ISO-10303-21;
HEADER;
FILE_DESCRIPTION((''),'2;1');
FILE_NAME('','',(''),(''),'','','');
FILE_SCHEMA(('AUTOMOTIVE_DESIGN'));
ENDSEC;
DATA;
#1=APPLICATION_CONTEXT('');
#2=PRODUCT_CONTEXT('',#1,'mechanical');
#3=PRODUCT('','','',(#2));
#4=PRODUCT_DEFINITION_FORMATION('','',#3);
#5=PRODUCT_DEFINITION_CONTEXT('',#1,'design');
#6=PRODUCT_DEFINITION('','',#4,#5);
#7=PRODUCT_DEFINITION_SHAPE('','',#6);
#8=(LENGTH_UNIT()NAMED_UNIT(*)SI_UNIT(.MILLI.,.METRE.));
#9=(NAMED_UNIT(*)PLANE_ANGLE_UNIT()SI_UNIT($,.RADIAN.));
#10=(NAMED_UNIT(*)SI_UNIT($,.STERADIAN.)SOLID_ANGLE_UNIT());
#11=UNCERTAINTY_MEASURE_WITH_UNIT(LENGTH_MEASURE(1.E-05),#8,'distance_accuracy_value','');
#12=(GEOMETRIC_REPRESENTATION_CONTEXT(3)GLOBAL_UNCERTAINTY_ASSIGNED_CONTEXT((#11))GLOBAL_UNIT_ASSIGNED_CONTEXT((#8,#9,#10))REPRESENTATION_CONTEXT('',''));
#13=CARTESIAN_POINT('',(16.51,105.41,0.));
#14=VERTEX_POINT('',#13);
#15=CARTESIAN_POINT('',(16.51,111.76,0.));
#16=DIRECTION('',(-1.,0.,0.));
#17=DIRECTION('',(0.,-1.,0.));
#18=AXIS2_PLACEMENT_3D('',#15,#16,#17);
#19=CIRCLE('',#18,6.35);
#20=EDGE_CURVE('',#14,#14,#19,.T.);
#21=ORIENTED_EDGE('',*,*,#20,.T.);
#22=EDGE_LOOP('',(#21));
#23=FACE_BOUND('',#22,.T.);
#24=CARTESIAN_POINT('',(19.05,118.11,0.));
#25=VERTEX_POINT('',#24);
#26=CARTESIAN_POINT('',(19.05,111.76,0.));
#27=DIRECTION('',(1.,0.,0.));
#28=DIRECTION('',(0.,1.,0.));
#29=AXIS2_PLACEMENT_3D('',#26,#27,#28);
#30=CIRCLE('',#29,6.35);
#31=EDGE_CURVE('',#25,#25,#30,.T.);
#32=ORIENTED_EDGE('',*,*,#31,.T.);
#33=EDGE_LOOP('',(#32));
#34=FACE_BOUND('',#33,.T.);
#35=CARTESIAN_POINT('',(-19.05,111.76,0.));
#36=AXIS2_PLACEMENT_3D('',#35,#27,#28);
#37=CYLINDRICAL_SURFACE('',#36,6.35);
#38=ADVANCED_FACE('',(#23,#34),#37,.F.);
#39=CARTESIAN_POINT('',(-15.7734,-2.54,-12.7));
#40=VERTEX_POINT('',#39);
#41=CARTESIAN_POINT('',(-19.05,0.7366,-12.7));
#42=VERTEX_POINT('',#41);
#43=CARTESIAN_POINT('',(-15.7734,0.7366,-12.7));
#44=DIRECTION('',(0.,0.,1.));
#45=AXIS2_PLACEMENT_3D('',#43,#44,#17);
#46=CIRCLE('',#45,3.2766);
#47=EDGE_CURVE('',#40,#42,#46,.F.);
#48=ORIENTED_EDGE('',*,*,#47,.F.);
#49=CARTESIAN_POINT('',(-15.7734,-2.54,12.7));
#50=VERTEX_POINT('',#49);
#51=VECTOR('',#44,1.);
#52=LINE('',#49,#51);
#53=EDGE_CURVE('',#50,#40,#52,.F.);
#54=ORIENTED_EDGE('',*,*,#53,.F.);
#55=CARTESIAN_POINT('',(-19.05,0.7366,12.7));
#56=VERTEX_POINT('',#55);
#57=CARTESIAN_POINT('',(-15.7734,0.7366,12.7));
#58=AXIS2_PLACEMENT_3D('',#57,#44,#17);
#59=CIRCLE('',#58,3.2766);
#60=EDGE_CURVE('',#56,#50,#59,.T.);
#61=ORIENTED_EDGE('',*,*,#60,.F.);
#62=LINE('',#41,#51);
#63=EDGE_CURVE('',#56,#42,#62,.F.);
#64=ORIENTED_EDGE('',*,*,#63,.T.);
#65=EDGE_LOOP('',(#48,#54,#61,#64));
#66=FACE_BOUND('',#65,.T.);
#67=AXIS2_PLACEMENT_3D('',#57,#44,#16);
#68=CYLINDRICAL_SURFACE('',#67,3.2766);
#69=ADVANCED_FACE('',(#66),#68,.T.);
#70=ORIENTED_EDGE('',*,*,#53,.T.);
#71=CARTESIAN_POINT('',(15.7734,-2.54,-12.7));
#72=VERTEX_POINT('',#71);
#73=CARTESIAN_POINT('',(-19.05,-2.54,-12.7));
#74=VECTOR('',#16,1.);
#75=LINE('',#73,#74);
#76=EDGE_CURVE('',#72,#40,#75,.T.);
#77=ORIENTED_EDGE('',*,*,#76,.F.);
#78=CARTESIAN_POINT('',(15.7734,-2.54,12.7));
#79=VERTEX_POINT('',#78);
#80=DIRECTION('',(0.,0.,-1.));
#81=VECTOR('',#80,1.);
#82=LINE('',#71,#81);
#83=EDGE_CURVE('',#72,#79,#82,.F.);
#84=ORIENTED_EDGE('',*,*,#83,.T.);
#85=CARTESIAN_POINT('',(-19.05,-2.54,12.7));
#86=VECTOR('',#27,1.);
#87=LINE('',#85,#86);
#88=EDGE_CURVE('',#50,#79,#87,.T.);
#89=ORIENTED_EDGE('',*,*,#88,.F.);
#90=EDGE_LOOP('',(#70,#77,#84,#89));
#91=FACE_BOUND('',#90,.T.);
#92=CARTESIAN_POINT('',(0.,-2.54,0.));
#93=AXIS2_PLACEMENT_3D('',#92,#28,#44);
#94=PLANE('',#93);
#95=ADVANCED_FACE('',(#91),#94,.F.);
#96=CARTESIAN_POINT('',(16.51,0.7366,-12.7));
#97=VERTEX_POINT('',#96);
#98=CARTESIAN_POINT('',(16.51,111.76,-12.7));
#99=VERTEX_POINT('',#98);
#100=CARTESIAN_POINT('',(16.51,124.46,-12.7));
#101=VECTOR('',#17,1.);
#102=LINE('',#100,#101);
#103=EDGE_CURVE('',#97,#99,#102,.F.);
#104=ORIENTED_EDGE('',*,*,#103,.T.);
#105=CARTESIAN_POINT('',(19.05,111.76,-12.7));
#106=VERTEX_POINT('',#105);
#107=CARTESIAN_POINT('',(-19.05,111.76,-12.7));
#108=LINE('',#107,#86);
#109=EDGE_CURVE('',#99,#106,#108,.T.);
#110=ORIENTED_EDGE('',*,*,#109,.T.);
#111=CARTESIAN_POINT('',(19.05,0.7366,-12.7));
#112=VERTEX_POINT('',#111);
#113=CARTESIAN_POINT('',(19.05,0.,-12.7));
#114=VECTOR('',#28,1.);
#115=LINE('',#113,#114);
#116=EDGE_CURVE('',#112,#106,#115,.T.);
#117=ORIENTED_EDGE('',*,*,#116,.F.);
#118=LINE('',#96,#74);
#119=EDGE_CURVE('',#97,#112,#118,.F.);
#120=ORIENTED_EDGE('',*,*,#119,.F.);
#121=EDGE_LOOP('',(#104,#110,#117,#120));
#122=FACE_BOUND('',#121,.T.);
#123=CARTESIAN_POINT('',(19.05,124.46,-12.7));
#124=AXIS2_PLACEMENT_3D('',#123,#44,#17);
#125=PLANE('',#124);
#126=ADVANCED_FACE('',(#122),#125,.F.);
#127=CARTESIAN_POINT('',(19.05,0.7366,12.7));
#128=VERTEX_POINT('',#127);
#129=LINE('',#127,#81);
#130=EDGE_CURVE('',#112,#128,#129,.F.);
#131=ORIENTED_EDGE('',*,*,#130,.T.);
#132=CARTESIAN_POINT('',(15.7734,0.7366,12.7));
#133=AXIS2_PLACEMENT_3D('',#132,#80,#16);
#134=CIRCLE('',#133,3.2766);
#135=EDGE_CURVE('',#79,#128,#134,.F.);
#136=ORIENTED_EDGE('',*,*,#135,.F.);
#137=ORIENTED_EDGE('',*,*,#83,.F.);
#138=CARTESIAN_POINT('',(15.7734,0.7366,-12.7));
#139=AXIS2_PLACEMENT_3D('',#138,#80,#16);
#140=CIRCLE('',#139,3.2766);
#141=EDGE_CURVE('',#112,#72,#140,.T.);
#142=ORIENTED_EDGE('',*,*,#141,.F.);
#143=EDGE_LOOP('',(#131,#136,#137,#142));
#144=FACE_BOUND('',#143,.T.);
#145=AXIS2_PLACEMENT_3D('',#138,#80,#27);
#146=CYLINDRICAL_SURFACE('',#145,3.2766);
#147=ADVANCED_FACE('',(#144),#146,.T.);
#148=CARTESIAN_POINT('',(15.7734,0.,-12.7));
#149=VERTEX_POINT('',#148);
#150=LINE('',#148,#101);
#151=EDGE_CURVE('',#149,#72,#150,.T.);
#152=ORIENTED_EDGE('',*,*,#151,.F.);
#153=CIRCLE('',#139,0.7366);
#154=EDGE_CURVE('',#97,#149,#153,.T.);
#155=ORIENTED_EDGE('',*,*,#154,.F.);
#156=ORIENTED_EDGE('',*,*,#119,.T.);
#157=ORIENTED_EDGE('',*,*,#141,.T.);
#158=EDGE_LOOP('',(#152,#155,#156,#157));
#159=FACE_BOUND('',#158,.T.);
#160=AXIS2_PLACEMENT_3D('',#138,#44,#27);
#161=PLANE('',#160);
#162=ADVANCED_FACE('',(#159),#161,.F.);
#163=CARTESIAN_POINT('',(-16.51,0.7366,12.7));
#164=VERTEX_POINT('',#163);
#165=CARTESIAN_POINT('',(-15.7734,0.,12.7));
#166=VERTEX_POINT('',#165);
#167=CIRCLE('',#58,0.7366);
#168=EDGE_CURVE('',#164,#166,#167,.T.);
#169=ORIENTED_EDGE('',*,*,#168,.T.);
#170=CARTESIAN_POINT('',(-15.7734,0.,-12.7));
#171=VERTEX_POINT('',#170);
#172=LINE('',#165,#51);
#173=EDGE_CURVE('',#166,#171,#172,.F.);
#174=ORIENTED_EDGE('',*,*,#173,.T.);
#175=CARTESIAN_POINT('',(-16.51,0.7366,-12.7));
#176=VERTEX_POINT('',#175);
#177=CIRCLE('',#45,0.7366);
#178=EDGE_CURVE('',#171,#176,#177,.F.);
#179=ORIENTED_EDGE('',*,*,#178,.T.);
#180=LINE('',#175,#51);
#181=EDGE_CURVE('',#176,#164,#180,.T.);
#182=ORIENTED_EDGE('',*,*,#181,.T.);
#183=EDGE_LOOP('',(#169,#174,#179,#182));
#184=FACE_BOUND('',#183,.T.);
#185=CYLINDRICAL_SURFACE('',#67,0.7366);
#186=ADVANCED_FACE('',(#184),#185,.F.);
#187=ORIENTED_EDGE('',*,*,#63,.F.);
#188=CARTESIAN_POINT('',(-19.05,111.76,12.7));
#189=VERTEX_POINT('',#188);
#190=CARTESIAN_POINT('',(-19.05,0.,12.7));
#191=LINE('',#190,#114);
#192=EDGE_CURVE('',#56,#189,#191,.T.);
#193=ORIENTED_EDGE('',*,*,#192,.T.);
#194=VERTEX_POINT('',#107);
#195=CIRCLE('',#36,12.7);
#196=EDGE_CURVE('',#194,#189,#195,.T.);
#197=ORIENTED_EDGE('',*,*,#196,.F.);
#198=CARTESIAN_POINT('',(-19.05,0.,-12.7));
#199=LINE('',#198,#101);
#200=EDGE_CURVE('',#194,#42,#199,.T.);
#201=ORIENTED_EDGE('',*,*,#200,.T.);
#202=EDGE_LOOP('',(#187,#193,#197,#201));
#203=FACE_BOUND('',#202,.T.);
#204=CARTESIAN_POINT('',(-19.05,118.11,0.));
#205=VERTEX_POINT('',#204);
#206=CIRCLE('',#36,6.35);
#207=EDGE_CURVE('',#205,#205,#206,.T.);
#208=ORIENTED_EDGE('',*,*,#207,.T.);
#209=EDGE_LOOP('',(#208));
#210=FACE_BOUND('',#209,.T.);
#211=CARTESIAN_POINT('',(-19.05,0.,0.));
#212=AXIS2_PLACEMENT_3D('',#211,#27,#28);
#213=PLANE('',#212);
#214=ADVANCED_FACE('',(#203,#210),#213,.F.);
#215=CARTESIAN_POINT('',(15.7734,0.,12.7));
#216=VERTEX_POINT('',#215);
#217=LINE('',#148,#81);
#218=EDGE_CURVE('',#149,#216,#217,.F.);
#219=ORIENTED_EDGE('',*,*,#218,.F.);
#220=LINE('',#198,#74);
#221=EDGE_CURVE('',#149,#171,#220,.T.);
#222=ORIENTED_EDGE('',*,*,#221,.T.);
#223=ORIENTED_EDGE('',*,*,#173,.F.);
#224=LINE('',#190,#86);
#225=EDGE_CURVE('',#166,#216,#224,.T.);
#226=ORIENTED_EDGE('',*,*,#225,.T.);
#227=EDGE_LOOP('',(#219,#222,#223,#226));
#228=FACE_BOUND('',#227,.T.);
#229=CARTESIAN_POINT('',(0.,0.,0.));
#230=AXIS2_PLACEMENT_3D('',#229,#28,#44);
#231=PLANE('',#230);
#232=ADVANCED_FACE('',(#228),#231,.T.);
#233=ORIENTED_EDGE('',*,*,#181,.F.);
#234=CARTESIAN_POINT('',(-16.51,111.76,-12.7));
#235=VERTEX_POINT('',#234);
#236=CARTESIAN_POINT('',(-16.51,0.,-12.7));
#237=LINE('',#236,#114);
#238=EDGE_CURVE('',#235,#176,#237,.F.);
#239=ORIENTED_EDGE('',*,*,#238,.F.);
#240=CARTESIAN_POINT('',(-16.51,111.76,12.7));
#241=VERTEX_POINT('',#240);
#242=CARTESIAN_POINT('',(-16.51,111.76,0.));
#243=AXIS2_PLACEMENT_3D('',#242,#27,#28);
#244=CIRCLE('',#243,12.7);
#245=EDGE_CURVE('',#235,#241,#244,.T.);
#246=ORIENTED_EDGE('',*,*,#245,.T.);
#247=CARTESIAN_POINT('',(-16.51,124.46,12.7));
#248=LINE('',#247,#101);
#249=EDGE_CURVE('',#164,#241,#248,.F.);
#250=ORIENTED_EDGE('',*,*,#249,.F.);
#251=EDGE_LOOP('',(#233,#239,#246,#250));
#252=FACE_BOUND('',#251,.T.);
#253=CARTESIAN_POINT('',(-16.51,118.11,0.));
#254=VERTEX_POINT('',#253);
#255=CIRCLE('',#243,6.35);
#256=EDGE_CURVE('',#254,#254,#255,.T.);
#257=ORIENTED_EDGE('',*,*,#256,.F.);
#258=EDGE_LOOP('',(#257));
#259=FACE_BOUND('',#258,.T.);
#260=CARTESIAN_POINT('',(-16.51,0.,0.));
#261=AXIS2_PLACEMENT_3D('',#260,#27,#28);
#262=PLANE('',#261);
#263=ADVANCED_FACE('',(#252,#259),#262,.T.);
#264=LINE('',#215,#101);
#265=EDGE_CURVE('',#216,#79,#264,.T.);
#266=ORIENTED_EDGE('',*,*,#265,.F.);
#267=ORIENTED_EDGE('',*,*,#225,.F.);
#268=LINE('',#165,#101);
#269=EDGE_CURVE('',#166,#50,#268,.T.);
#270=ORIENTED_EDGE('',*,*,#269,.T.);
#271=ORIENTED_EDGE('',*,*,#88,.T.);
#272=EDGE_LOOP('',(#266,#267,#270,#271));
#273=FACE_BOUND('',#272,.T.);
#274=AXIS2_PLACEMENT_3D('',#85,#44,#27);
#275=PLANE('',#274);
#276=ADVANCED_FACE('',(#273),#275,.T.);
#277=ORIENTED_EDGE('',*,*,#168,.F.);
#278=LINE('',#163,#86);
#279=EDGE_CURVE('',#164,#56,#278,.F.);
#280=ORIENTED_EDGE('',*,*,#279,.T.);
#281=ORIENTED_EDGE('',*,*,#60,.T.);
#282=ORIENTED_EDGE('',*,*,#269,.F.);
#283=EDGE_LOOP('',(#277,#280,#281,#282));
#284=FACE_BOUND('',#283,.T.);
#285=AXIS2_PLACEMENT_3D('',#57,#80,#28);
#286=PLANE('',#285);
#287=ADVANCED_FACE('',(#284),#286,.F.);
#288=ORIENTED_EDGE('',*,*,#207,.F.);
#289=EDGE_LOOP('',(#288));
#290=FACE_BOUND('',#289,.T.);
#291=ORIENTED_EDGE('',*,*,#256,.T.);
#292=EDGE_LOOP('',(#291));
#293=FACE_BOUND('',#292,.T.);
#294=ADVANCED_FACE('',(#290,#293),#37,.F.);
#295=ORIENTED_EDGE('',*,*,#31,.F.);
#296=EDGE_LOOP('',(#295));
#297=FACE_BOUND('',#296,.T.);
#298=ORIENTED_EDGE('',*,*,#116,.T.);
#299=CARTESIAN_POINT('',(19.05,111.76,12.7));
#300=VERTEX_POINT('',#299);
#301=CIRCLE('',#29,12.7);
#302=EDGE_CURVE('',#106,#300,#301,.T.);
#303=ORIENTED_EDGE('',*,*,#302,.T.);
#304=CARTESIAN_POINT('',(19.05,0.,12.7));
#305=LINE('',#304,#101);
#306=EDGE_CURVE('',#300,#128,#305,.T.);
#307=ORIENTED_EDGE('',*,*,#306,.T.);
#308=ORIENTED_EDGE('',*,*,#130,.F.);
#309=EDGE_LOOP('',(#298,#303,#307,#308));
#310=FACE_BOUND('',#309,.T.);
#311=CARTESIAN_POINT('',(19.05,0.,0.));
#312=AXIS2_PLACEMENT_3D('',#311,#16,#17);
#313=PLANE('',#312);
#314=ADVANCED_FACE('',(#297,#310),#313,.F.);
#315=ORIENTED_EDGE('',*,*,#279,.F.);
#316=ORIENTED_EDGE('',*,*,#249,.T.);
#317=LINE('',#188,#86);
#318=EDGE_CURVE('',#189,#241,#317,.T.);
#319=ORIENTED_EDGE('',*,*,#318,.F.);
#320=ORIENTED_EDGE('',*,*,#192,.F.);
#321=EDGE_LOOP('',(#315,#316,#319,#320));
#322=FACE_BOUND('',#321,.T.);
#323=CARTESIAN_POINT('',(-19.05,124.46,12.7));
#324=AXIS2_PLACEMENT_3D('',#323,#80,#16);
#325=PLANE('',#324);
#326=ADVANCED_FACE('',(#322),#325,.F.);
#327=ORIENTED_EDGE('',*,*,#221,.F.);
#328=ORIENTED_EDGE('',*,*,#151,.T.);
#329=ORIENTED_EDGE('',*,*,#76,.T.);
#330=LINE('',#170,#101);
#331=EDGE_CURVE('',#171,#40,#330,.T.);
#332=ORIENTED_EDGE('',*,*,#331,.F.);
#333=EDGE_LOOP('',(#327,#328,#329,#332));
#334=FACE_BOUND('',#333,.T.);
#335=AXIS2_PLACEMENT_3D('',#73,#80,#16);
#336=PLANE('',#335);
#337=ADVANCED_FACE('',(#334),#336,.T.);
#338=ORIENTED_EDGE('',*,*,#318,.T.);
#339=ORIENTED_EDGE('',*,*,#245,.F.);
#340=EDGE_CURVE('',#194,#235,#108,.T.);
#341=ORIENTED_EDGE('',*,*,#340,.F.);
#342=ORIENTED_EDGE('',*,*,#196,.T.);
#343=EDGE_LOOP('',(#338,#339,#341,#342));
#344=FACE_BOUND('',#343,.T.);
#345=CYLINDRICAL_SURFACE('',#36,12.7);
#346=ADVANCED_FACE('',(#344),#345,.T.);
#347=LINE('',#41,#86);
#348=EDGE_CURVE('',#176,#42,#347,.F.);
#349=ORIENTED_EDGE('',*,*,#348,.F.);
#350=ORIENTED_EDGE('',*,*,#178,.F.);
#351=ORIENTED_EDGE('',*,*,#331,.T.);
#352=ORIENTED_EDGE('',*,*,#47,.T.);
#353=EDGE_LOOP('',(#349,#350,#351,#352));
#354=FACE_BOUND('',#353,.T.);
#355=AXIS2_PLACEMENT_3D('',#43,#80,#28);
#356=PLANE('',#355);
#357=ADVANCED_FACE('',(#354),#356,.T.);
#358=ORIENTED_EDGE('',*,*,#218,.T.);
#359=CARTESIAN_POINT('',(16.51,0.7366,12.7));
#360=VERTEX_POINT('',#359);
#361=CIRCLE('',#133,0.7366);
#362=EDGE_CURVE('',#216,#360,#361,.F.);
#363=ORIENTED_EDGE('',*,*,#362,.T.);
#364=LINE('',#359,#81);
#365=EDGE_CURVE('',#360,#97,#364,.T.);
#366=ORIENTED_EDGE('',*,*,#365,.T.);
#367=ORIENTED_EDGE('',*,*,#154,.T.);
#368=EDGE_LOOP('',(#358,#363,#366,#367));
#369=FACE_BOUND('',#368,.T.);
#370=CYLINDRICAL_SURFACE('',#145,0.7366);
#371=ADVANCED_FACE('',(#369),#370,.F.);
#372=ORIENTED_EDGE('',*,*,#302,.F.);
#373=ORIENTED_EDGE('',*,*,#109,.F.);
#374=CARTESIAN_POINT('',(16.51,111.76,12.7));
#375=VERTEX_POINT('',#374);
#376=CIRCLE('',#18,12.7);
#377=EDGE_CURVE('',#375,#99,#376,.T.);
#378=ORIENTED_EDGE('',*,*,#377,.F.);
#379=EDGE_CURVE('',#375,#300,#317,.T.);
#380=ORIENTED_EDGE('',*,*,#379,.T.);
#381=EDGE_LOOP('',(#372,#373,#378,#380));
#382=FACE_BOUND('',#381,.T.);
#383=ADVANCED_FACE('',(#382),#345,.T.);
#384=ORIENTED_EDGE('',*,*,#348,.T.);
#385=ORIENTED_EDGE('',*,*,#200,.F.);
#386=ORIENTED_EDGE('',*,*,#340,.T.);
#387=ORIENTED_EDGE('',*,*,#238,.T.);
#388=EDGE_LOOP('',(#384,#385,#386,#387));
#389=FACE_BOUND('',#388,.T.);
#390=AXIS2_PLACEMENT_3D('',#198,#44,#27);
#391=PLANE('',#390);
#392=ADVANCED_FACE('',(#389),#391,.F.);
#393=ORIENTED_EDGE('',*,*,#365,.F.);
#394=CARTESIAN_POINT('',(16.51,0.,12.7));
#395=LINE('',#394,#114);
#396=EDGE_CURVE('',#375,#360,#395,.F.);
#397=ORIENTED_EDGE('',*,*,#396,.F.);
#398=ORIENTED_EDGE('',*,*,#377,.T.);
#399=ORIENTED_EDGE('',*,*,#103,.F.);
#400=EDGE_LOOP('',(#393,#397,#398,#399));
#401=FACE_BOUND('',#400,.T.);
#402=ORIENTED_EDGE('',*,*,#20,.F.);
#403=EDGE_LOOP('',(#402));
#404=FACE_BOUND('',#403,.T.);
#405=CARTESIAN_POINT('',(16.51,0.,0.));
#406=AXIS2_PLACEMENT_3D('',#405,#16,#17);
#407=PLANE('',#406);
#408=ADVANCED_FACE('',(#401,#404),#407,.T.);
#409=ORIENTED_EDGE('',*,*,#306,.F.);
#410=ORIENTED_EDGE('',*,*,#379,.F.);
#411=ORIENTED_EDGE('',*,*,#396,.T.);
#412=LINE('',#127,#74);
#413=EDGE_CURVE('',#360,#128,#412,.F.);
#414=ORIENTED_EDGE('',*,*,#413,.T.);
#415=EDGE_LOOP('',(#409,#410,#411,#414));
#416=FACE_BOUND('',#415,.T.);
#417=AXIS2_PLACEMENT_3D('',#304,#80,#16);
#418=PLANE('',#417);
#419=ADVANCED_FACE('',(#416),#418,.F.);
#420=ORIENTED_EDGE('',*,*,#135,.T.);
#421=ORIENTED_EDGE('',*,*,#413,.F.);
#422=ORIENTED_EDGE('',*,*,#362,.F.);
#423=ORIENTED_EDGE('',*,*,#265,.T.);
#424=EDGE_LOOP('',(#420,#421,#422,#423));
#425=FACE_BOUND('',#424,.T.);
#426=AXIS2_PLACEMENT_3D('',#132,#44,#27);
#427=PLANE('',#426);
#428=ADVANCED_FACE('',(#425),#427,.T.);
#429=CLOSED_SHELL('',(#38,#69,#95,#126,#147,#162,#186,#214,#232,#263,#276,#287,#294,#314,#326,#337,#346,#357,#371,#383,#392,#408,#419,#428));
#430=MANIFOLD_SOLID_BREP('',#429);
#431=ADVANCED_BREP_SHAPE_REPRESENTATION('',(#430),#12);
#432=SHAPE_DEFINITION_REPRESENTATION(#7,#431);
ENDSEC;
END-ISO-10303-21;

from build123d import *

# Parameters (mm, degrees)
SKETCH2_W                      = 38.1
SKETCH2_H                      = 25.4
BASE_FLANGE1_DEPTH             = 2.54
EDGE_FLANGE1_STRIP_W           = 11.6332
EDGE_FLANGE1_STRIP_H           = 2.54
EDGE_FLANGE1_STRIP_CUT_DEPTH   = 25.4
EDGE_FLANGE1_STRIP_2_W         = 11.6332
EDGE_FLANGE1_STRIP_2_H         = 2.54
EDGE_FLANGE1_STRIP_CUT_2_DEPTH = 25.4
EDGE_FLANGE1_DEPTH             = 25.4
EDGE_FLANGE1_BEND_DEPTH        = 25.4
CUT_EXTRUDE1_DEPTH             = 131.779171124
SKETCH14_R                     = 6.35
CUT_EXTRUDE2_DEPTH             = 131.779171124


# Sheet-metal steps are written as plain solids
with BuildPart() as part:
    # Sketch2 → Base-Flange1 (new body)
    with BuildSketch(Plane(origin=(0, 0, 0), x_dir=(1, 0, 0), z_dir=(0, 1, 0))):
        Rectangle(SKETCH2_W, SKETCH2_H)
    extrude(amount=-BASE_FLANGE1_DEPTH)

    # Edge-Flange1 strip (across the edge) → Edge-Flange1 strip cut (cut)
    with BuildSketch(Plane(origin=(19.05, 0, 12.7), x_dir=(-1, 0, 0), z_dir=(0, 0, -1))):
        with Locations((-2.54, -1.27)):
            Rectangle(EDGE_FLANGE1_STRIP_W, EDGE_FLANGE1_STRIP_H)
    extrude(amount=EDGE_FLANGE1_STRIP_CUT_DEPTH, mode=Mode.SUBTRACT)

    # Edge-Flange1 strip 2 (across the edge) → Edge-Flange1 strip cut 2 (cut)
    with BuildSketch(Plane(origin=(-19.05, 0, -12.7), x_dir=(1, 0, 0), z_dir=(0, 0, 1))):
        with Locations((-2.54, -1.27)):
            Rectangle(EDGE_FLANGE1_STRIP_2_W, EDGE_FLANGE1_STRIP_2_H)
    extrude(amount=EDGE_FLANGE1_STRIP_CUT_2_DEPTH, mode=Mode.SUBTRACT)

    # Edge-Flange1 section (across the edge) → Edge-Flange1 (add)
    with BuildSketch(Plane(origin=(19.05, 0, 12.7), x_dir=(-1, 0, 0), z_dir=(0, 0, -1))):
        with BuildLine():
            Line((0, 0.7366), (0, 124.46))
            Line((0, 124.46), (2.54, 124.46))
            Line((2.54, 124.46), (2.54, 0.7366))
            ThreePointArc((2.54, 0.7366), (2.755745145, 0.215745145), (3.2766, 0))
            Line((3.2766, 0), (3.2766, -2.54))
            ThreePointArc((3.2766, -2.54), (0.959693921, -1.580306079), (0, 0.7366))
        make_face()
    extrude(amount=EDGE_FLANGE1_DEPTH)

    # Edge-Flange1 section 2 (across the edge) → Edge-Flange1 bend (add)
    with BuildSketch(Plane(origin=(-19.05, 0, -12.7), x_dir=(1, 0, 0), z_dir=(0, 0, 1))):
        with BuildLine():
            Line((0, 0.7366), (0, 124.46))
            Line((0, 124.46), (2.54, 124.46))
            Line((2.54, 124.46), (2.54, 0.7366))
            ThreePointArc((2.54, 0.7366), (2.755745145, 0.215745145), (3.2766, 0))
            Line((3.2766, 0), (3.2766, -2.54))
            ThreePointArc((3.2766, -2.54), (0.959693921, -1.580306079), (0, 0.7366))
        make_face()
    extrude(amount=EDGE_FLANGE1_BEND_DEPTH)

    # Sketch13 → Cut-Extrude1 (cut, through all)
    with BuildSketch(Plane(origin=(19.05, 0, 0), x_dir=(0, 0, -1), z_dir=(1, 0, 0))):
        with BuildLine():
            ThreePointArc((-2.4e-08, 124.46), (8.980256112, 120.74025613), (12.7, 111.76))
            Line((12.7, 111.76), (12.7, 124.46))
            Line((12.7, 124.46), (-2.4e-08, 124.46))
        make_face()
        with BuildLine():
            Line((-12.7, 124.46), (-12.7, 111.76))
            ThreePointArc((-12.7, 111.76), (-8.98025613, 120.740256112), (-2.4e-08, 124.46))
            Line((-2.4e-08, 124.46), (-12.7, 124.46))
        make_face()
    extrude(amount=-CUT_EXTRUDE1_DEPTH, mode=Mode.SUBTRACT)

    # Sketch14 → Cut-Extrude2 (cut, through all)
    with BuildSketch(Plane(origin=(19.05, 0, 0), x_dir=(0, 0, -1), z_dir=(1, 0, 0))):
        with Locations(Location((0, 111.76, 0), (0, 0, 90))):
            Circle(SKETCH14_R)
    extrude(amount=-CUT_EXTRUDE2_DEPTH, mode=Mode.SUBTRACT)


solid = part.part
